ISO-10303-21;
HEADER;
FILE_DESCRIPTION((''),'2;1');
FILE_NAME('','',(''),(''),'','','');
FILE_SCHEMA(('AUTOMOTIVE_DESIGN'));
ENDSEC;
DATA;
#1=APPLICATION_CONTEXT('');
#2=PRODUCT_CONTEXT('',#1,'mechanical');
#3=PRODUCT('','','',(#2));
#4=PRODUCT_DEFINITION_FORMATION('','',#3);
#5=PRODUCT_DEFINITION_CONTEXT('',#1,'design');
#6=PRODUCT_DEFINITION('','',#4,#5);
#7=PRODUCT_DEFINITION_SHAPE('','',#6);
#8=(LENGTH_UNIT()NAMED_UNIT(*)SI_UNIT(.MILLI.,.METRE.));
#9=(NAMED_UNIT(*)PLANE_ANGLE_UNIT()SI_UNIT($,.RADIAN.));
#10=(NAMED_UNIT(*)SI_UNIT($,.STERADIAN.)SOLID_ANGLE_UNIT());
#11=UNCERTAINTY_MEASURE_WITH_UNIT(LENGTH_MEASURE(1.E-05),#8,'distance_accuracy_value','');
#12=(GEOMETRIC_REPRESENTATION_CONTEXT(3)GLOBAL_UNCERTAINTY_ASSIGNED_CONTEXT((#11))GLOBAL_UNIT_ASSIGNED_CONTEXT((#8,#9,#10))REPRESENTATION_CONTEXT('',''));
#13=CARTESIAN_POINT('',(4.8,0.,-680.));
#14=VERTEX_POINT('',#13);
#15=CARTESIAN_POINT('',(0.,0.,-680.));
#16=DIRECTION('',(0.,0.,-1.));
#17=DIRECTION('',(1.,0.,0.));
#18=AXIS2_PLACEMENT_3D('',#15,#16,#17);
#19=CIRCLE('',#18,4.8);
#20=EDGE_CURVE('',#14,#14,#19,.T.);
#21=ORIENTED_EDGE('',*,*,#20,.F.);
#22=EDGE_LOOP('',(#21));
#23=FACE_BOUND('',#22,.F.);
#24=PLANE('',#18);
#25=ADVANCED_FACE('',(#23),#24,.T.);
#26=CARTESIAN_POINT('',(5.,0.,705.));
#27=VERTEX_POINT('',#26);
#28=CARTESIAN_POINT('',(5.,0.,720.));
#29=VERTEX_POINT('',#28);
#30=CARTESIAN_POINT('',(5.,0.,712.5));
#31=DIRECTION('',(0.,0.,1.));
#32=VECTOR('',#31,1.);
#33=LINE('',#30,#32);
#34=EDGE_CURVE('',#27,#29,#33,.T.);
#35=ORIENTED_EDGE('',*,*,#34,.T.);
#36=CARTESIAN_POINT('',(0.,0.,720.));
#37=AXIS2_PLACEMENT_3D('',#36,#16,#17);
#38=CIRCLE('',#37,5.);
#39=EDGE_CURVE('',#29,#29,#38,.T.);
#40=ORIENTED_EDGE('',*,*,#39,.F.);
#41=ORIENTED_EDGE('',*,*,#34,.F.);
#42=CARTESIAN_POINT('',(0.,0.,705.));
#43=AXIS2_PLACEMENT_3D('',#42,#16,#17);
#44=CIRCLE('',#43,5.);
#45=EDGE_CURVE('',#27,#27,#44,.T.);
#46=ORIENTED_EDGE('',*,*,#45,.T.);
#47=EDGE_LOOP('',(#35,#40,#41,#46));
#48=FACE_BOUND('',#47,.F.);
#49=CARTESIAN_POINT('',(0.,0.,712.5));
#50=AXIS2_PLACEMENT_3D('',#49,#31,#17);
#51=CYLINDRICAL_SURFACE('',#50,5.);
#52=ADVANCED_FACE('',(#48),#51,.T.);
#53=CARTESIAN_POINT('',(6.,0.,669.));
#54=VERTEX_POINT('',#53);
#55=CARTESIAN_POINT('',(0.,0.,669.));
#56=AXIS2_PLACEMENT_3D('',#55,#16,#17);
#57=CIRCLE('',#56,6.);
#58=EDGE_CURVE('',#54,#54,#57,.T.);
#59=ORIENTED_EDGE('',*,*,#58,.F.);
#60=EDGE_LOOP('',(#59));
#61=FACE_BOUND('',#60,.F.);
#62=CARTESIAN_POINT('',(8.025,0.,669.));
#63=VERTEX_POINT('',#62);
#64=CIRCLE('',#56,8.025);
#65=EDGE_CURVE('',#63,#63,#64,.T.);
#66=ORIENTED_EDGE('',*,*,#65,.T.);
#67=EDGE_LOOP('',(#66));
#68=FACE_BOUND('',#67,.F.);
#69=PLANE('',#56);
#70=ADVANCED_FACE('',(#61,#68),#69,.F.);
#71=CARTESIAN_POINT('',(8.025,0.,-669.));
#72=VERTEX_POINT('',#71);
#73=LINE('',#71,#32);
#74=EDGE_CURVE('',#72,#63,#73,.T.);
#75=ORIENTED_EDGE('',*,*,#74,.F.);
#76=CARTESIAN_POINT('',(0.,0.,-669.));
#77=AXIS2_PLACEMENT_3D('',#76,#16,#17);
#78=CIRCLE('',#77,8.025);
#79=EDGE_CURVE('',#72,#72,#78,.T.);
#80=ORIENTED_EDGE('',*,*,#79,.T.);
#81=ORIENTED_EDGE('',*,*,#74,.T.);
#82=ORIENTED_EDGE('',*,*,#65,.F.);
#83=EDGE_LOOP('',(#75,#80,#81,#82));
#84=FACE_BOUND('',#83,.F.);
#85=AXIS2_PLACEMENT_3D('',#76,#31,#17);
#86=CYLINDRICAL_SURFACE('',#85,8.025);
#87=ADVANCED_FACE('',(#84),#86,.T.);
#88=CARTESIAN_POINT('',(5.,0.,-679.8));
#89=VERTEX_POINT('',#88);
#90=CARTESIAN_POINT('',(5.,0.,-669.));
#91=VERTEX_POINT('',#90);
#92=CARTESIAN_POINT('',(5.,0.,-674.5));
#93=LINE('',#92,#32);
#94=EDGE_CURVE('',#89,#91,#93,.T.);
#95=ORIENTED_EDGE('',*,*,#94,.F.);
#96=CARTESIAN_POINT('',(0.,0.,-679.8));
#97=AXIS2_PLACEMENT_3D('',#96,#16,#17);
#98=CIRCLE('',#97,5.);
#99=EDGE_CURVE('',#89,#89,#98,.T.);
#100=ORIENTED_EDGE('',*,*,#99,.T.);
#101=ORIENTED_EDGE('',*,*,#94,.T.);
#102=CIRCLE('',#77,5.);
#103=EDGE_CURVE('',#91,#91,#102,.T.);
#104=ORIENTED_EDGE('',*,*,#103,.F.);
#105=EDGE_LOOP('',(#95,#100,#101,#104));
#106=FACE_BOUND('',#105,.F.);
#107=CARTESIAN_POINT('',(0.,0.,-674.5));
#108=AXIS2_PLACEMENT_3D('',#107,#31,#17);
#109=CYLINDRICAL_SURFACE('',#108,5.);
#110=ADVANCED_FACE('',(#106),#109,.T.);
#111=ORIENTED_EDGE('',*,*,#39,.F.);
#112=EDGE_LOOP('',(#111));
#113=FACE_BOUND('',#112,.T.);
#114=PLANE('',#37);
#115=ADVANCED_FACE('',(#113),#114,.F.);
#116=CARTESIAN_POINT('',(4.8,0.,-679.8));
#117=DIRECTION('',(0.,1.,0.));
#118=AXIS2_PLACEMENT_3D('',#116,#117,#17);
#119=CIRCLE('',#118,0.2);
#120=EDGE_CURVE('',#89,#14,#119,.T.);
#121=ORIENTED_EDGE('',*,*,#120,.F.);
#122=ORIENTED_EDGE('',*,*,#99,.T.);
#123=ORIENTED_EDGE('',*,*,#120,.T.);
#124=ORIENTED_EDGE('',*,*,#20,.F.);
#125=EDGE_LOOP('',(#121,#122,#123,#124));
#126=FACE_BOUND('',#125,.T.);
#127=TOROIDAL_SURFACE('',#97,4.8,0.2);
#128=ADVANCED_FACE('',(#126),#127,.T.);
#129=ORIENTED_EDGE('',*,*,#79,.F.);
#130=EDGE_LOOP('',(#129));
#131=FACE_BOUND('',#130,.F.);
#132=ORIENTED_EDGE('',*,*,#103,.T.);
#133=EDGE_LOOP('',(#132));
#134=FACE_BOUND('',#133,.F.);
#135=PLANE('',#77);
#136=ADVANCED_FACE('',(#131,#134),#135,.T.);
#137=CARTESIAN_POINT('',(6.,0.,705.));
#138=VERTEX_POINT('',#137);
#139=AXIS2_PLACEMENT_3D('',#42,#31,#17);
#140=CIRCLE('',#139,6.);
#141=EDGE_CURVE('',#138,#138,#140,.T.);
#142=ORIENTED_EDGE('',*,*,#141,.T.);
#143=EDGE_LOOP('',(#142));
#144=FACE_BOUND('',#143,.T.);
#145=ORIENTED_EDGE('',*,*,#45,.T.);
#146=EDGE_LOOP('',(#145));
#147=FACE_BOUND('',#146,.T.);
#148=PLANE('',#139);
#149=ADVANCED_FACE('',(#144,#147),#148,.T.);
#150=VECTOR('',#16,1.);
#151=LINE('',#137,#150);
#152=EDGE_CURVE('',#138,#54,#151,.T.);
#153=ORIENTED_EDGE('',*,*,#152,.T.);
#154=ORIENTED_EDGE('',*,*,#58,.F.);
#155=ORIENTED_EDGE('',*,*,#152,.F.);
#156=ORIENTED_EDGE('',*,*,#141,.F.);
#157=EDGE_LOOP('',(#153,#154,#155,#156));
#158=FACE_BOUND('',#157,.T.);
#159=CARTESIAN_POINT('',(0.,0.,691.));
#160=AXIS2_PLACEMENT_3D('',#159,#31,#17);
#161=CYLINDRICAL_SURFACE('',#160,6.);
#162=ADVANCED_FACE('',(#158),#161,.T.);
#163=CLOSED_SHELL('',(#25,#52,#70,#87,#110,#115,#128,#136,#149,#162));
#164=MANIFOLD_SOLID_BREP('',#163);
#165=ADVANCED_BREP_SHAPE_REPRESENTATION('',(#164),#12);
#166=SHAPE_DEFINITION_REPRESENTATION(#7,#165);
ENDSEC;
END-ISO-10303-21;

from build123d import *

# Parameters (mm, degrees)
F0_W   = 5
F0_H   = 15
F0_W_2 = 6
F0_H_2 = 22
F0_H_3 = 11
F3_R   = 0.2


# Not quite as in the source:
# - the program builds the solid bodies; features that only make, move or delete a surface that nothing else refers to are left out


with BuildPart() as f1:
    # F0 (on Front) → F1 (revolve)
    with BuildSketch(Plane.XZ):
        with Locations((2.5, 712.5)):
            Rectangle(F0_W, F0_H)
    revolve(axis=Axis((0, 0, -310.3163262457), (0, 0, -1)))



with BuildPart() as f1b:
    # F0 (on Front) → F1, piece 2 (revolve)
    with BuildSketch(Plane.XZ):
        with Locations((3, 680)):
            Rectangle(F0_W_2, F0_H_2)
        Polygon((0, 669), (0, 59.3673475087), (0, -669), (5, -669), (8.025, -669), (8.025, 669), (6, 669), align=None)
        with Locations((2.5, -674.5)):
            Rectangle(F0_W, F0_H_3)
    revolve(axis=Axis((0, 0, -310.3163262457), (0, 0, -1)))


with BuildPart() as f1_1:
    add(f1.part)

    add(f1b.part)  # F2 merges F1b
    # F0 (on Front) → F2 (revolve)
    with BuildSketch(Plane.XZ):
        Polygon((0, 705), (0, 691), (6, 691), (6, 705), (5, 705), align=None)
    revolve(axis=Axis((0, 0, 389.6836737543), (0, 0, 1)))

    # F3
    f3_edges = [f1_1.edges().sort_by_distance(p)[0] for p in [
        (-5, 0, -680),
    ]]
    fillet(f3_edges, radius=F3_R)


solid = f1_1.part
